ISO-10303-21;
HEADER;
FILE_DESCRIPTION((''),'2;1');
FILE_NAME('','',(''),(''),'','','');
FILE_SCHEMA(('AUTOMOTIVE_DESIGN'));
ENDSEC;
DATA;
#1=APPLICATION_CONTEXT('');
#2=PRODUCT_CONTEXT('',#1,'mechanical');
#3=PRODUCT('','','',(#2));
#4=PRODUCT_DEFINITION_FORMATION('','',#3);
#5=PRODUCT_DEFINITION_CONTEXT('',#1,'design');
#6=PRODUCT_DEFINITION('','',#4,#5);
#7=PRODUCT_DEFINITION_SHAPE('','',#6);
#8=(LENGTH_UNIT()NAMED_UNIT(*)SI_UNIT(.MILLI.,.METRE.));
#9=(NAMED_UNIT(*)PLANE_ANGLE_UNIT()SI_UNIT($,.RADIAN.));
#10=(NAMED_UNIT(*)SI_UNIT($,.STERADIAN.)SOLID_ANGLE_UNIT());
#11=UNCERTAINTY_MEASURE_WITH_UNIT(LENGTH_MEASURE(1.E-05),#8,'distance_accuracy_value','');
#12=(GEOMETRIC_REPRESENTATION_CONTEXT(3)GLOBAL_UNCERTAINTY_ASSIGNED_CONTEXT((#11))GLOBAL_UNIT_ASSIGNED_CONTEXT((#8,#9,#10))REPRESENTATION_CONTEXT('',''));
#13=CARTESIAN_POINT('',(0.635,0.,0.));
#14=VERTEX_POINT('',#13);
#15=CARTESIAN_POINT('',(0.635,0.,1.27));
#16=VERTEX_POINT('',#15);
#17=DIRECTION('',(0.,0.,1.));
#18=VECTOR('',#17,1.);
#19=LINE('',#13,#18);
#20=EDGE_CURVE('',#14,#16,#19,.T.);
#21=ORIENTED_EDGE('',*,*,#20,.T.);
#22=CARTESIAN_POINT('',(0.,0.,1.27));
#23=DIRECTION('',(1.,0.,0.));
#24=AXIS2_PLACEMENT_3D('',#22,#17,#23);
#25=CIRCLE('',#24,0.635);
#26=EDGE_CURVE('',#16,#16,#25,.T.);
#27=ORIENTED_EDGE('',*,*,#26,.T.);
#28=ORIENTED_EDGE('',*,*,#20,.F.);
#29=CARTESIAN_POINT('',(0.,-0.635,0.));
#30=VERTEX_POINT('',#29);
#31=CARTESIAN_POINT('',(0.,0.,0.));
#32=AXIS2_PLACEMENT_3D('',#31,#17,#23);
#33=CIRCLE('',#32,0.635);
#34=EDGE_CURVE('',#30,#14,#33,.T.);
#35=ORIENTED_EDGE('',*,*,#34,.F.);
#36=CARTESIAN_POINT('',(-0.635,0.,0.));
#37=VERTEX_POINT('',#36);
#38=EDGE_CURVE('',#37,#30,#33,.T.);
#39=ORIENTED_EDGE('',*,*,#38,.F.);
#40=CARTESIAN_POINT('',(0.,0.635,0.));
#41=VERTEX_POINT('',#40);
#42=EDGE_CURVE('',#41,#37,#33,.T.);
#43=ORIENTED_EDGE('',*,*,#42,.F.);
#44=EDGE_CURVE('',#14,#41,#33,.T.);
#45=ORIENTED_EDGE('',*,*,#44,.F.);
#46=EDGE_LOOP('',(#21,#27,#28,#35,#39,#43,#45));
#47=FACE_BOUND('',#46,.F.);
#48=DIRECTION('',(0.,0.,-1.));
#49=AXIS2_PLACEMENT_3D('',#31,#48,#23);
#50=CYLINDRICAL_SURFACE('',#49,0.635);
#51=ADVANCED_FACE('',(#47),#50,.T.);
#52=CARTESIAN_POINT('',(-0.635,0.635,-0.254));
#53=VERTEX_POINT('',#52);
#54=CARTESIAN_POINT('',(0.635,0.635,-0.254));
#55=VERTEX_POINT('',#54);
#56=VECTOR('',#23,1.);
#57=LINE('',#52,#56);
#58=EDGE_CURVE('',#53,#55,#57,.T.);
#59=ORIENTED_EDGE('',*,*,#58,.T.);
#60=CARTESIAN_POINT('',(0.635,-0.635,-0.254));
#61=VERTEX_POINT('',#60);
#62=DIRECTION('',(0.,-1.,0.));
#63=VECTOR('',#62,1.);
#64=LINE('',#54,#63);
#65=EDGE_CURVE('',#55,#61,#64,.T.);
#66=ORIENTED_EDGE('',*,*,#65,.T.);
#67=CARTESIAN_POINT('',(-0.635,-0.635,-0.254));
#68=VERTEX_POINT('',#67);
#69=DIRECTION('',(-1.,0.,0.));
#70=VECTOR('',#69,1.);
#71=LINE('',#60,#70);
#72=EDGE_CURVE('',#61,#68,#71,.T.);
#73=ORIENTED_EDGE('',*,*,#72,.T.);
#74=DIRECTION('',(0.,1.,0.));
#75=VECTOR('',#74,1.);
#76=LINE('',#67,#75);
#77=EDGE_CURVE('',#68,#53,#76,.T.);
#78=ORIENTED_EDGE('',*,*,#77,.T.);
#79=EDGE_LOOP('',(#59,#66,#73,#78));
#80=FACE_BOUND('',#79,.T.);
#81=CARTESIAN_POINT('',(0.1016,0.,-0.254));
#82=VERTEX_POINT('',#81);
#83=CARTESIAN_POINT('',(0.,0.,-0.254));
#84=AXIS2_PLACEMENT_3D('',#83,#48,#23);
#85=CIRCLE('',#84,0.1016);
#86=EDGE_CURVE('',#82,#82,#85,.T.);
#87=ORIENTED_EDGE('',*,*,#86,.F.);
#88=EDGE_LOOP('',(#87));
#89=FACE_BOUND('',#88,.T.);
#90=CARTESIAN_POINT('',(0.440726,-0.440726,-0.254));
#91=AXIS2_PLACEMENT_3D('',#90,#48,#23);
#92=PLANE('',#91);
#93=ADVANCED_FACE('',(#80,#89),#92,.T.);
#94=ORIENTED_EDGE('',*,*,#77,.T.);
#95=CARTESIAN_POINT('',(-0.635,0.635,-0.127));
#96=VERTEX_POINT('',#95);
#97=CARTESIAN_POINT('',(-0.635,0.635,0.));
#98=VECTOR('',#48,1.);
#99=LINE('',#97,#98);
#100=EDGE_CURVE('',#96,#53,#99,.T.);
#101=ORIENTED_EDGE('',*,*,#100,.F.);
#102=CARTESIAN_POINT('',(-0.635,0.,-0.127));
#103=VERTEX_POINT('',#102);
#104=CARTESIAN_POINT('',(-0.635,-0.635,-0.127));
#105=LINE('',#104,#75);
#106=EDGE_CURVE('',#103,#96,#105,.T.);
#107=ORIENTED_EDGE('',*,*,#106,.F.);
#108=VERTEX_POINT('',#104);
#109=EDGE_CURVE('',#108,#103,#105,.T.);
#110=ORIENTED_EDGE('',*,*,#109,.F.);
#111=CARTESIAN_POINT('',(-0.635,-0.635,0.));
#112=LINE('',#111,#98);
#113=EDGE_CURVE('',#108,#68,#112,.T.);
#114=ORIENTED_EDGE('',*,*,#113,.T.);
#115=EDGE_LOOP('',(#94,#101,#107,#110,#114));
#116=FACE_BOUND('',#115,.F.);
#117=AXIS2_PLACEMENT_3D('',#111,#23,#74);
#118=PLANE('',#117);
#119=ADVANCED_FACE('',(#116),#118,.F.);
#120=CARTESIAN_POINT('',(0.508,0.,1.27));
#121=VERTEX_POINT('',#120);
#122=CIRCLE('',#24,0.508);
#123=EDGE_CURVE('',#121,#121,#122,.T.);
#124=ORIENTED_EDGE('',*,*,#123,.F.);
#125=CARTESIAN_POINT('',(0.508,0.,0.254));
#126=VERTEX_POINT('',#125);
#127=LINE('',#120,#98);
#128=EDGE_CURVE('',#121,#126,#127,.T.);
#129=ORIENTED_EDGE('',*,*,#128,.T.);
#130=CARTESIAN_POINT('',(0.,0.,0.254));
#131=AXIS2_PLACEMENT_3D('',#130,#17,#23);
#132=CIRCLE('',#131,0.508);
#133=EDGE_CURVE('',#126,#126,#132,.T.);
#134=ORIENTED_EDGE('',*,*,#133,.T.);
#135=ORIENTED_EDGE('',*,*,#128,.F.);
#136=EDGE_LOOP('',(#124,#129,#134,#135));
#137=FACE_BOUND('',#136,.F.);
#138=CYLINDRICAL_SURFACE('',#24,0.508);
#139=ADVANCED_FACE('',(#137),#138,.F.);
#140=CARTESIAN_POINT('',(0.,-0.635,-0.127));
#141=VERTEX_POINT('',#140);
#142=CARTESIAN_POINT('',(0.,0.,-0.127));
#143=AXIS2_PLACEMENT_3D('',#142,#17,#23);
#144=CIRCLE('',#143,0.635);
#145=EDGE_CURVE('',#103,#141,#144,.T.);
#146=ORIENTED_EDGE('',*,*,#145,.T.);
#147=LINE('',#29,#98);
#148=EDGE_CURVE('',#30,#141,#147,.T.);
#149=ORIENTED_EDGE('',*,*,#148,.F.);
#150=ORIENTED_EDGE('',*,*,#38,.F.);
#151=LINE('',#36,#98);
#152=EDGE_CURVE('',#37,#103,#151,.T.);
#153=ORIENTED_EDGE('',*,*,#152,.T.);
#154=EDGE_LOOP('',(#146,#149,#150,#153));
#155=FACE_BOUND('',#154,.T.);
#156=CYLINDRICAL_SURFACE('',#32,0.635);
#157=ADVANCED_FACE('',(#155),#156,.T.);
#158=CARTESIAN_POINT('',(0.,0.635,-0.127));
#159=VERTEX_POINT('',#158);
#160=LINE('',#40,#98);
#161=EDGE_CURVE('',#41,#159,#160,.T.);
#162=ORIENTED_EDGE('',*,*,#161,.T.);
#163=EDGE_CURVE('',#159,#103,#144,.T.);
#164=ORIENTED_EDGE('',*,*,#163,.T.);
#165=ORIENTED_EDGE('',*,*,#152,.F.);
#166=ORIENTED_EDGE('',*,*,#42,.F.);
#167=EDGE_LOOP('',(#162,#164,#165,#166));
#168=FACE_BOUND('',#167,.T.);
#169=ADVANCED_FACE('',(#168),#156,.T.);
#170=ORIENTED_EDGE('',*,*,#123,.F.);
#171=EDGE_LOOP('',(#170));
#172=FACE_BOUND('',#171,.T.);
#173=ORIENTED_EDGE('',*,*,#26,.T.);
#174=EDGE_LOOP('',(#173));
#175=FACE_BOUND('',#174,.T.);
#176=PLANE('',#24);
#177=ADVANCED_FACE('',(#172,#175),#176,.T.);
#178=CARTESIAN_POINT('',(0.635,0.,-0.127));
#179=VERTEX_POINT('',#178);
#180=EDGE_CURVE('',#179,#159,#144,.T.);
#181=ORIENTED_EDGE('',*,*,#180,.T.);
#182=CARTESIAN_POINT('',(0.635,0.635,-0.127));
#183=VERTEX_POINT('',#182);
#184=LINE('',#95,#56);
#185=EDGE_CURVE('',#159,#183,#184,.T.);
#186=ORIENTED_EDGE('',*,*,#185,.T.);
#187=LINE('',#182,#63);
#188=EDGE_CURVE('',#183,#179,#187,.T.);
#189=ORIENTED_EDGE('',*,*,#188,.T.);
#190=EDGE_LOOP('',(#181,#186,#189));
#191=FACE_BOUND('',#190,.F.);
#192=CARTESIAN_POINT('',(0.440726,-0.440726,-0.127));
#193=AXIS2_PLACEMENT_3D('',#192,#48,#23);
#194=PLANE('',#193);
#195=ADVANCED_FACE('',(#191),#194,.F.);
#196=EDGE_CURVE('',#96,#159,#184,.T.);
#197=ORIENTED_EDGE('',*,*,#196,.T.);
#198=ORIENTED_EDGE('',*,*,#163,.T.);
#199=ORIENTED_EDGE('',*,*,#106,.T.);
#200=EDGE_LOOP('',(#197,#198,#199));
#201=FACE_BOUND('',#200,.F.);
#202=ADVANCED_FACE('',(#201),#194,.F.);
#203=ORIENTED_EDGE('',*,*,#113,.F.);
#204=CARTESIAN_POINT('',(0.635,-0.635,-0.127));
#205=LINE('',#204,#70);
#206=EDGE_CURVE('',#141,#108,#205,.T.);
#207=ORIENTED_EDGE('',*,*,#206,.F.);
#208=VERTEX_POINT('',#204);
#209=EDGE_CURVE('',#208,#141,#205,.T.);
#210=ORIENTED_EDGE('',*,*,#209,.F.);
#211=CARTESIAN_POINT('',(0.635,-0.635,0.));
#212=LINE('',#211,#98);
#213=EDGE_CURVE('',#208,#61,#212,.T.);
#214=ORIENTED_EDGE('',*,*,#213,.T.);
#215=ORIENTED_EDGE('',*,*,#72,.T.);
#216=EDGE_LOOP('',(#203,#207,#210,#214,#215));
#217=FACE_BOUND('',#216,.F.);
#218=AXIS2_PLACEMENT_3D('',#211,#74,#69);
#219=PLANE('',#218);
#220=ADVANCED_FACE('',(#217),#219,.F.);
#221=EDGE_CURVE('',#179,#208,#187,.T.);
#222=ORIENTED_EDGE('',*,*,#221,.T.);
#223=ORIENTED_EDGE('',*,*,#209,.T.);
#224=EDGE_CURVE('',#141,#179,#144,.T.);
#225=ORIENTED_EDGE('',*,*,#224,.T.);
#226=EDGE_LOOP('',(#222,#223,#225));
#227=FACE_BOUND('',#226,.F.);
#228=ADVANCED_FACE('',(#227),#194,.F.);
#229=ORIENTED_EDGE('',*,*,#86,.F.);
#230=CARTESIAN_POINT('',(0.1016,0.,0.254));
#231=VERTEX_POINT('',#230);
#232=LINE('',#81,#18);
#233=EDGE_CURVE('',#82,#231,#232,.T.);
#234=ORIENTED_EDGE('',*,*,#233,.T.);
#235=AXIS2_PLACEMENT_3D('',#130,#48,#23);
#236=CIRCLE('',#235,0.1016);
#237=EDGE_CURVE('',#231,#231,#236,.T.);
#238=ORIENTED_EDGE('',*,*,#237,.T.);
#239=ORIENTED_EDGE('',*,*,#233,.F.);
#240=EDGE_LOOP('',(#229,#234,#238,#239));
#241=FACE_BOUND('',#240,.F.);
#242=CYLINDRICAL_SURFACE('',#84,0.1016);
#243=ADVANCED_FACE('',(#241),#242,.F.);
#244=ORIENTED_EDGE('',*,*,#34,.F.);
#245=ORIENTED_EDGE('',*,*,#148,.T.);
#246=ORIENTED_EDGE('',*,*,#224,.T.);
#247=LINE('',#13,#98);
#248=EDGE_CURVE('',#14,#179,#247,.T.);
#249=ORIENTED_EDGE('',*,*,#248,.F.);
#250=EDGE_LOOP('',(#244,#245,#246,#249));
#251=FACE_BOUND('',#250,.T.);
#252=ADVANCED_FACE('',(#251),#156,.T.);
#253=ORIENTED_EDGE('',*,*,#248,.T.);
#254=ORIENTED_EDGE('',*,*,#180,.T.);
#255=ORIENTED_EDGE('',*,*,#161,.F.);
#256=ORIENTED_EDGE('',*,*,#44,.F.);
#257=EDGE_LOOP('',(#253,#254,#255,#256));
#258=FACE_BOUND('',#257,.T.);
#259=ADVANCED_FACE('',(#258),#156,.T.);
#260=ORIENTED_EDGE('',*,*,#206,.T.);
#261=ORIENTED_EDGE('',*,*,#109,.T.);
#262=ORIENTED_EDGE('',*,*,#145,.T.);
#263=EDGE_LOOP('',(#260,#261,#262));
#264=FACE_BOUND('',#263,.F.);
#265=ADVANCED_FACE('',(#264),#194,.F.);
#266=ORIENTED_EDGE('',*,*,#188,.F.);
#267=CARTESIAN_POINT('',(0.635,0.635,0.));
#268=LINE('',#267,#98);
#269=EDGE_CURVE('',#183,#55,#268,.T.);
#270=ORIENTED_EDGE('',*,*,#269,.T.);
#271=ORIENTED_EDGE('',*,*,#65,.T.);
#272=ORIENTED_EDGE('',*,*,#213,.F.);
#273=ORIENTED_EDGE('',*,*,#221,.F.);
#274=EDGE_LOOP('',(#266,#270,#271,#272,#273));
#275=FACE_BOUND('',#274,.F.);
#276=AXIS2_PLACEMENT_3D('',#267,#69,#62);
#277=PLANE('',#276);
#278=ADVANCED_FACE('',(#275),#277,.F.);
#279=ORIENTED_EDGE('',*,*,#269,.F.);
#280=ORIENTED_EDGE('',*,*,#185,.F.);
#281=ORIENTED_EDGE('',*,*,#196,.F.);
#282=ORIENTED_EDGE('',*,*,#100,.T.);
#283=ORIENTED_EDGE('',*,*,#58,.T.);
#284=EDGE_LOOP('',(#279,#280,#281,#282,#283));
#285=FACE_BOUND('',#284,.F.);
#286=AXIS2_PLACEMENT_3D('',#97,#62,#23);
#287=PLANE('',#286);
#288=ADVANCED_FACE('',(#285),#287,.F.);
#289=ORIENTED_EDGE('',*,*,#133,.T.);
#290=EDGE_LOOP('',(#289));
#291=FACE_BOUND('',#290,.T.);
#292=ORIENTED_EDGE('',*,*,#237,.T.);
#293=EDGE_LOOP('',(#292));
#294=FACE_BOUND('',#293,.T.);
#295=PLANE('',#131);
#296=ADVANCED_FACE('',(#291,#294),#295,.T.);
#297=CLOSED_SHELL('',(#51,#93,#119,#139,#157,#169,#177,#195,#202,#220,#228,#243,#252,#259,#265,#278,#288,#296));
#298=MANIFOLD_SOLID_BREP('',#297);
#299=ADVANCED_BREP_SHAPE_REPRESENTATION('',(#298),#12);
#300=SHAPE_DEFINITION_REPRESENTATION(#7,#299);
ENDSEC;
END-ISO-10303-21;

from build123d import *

# Parameters (mm, degrees)
F0_R     = 0.635
F1_DEPTH = 1.27
F2_R     = 0.508
F3_DEPTH = 1.016
F5_DEPTH = 0.254
F6_DEPTH = 0.127
F7_R     = 0.1016
F8_DEPTH = 25.4


with BuildPart() as f1:
    # F0 (on Top) → F1 (new body)
    with BuildSketch(Plane.XY):
        Circle(F0_R)
    extrude(amount=F1_DEPTH)

    # F2 (on face) → F3 (cut)
    with BuildSketch(Plane.XY.offset(1.27)):
        Circle(F2_R)
    extrude(amount=-F3_DEPTH, mode=Mode.SUBTRACT)

    # F4 (on face) → F5 (join)
    with BuildSketch(Plane(origin=(0, 0, 0), x_dir=(1, 0, 0), z_dir=(0, 0, -1))):
        with BuildLine():
            Line((0.635, 0), (0.635, 0.635))
            Line((0.635, 0.635), (0, 0.635))
            ThreePointArc((0, 0.635), (0.4490128061, 0.4490128061), (0.635, 0))
        make_face()
        with BuildLine():
            ThreePointArc((-0.635, 0), (-0.4490128061, 0.4490128061), (0, 0.635))
            Line((0, 0.635), (-0.635, 0.635))
            Line((-0.635, 0.635), (-0.635, 0))
        make_face()
        with BuildLine():
            ThreePointArc((0.635, 0), (0.4490128061, 0.4490128061), (0, 0.635))
            ThreePointArc((0, 0.635), (-0.4490128061, 0.4490128061), (-0.635, 0))
            ThreePointArc((-0.635, 0), (-0.4490128061, -0.4490128061), (0, -0.635))
            ThreePointArc((0, -0.635), (0.4490128061, -0.4490128061), (0.635, 0))
        make_face()
        with BuildLine():
            Line((0.635, -0.635), (0.635, 0))
            ThreePointArc((0.635, 0), (0.4490128061, -0.4490128061), (0, -0.635))
            Line((0, -0.635), (0.635, -0.635))
        make_face()
        with BuildLine():
            ThreePointArc((0, -0.635), (-0.4490128061, -0.4490128061), (-0.635, 0))
            Line((-0.635, 0), (-0.635, -0.635))
            Line((-0.635, -0.635), (0, -0.635))
        make_face()
    extrude(amount=F5_DEPTH)

    # F6 (cut): faces of the model
    f6_faces = [f1.faces().sort_by_distance(p)[0] for p in [
        (-0.4931613588, 0.4931613588, 0),
        (-0.4931613588, -0.4931613588, 0),
        (0.4931613588, -0.4931613588, 0),
        (0.4931613588, 0.4931613588, 0),
    ]]
    extrude(f6_faces, amount=-F6_DEPTH, mode=Mode.SUBTRACT)

    # F7 (on face) → F8 (cut)
    with BuildSketch(Plane(origin=(0, 0, -0.254), x_dir=(1, 0, 0), z_dir=(0, 0, -1))):
        Circle(F7_R)
    extrude(amount=-F8_DEPTH, mode=Mode.SUBTRACT)


solid = f1.part
